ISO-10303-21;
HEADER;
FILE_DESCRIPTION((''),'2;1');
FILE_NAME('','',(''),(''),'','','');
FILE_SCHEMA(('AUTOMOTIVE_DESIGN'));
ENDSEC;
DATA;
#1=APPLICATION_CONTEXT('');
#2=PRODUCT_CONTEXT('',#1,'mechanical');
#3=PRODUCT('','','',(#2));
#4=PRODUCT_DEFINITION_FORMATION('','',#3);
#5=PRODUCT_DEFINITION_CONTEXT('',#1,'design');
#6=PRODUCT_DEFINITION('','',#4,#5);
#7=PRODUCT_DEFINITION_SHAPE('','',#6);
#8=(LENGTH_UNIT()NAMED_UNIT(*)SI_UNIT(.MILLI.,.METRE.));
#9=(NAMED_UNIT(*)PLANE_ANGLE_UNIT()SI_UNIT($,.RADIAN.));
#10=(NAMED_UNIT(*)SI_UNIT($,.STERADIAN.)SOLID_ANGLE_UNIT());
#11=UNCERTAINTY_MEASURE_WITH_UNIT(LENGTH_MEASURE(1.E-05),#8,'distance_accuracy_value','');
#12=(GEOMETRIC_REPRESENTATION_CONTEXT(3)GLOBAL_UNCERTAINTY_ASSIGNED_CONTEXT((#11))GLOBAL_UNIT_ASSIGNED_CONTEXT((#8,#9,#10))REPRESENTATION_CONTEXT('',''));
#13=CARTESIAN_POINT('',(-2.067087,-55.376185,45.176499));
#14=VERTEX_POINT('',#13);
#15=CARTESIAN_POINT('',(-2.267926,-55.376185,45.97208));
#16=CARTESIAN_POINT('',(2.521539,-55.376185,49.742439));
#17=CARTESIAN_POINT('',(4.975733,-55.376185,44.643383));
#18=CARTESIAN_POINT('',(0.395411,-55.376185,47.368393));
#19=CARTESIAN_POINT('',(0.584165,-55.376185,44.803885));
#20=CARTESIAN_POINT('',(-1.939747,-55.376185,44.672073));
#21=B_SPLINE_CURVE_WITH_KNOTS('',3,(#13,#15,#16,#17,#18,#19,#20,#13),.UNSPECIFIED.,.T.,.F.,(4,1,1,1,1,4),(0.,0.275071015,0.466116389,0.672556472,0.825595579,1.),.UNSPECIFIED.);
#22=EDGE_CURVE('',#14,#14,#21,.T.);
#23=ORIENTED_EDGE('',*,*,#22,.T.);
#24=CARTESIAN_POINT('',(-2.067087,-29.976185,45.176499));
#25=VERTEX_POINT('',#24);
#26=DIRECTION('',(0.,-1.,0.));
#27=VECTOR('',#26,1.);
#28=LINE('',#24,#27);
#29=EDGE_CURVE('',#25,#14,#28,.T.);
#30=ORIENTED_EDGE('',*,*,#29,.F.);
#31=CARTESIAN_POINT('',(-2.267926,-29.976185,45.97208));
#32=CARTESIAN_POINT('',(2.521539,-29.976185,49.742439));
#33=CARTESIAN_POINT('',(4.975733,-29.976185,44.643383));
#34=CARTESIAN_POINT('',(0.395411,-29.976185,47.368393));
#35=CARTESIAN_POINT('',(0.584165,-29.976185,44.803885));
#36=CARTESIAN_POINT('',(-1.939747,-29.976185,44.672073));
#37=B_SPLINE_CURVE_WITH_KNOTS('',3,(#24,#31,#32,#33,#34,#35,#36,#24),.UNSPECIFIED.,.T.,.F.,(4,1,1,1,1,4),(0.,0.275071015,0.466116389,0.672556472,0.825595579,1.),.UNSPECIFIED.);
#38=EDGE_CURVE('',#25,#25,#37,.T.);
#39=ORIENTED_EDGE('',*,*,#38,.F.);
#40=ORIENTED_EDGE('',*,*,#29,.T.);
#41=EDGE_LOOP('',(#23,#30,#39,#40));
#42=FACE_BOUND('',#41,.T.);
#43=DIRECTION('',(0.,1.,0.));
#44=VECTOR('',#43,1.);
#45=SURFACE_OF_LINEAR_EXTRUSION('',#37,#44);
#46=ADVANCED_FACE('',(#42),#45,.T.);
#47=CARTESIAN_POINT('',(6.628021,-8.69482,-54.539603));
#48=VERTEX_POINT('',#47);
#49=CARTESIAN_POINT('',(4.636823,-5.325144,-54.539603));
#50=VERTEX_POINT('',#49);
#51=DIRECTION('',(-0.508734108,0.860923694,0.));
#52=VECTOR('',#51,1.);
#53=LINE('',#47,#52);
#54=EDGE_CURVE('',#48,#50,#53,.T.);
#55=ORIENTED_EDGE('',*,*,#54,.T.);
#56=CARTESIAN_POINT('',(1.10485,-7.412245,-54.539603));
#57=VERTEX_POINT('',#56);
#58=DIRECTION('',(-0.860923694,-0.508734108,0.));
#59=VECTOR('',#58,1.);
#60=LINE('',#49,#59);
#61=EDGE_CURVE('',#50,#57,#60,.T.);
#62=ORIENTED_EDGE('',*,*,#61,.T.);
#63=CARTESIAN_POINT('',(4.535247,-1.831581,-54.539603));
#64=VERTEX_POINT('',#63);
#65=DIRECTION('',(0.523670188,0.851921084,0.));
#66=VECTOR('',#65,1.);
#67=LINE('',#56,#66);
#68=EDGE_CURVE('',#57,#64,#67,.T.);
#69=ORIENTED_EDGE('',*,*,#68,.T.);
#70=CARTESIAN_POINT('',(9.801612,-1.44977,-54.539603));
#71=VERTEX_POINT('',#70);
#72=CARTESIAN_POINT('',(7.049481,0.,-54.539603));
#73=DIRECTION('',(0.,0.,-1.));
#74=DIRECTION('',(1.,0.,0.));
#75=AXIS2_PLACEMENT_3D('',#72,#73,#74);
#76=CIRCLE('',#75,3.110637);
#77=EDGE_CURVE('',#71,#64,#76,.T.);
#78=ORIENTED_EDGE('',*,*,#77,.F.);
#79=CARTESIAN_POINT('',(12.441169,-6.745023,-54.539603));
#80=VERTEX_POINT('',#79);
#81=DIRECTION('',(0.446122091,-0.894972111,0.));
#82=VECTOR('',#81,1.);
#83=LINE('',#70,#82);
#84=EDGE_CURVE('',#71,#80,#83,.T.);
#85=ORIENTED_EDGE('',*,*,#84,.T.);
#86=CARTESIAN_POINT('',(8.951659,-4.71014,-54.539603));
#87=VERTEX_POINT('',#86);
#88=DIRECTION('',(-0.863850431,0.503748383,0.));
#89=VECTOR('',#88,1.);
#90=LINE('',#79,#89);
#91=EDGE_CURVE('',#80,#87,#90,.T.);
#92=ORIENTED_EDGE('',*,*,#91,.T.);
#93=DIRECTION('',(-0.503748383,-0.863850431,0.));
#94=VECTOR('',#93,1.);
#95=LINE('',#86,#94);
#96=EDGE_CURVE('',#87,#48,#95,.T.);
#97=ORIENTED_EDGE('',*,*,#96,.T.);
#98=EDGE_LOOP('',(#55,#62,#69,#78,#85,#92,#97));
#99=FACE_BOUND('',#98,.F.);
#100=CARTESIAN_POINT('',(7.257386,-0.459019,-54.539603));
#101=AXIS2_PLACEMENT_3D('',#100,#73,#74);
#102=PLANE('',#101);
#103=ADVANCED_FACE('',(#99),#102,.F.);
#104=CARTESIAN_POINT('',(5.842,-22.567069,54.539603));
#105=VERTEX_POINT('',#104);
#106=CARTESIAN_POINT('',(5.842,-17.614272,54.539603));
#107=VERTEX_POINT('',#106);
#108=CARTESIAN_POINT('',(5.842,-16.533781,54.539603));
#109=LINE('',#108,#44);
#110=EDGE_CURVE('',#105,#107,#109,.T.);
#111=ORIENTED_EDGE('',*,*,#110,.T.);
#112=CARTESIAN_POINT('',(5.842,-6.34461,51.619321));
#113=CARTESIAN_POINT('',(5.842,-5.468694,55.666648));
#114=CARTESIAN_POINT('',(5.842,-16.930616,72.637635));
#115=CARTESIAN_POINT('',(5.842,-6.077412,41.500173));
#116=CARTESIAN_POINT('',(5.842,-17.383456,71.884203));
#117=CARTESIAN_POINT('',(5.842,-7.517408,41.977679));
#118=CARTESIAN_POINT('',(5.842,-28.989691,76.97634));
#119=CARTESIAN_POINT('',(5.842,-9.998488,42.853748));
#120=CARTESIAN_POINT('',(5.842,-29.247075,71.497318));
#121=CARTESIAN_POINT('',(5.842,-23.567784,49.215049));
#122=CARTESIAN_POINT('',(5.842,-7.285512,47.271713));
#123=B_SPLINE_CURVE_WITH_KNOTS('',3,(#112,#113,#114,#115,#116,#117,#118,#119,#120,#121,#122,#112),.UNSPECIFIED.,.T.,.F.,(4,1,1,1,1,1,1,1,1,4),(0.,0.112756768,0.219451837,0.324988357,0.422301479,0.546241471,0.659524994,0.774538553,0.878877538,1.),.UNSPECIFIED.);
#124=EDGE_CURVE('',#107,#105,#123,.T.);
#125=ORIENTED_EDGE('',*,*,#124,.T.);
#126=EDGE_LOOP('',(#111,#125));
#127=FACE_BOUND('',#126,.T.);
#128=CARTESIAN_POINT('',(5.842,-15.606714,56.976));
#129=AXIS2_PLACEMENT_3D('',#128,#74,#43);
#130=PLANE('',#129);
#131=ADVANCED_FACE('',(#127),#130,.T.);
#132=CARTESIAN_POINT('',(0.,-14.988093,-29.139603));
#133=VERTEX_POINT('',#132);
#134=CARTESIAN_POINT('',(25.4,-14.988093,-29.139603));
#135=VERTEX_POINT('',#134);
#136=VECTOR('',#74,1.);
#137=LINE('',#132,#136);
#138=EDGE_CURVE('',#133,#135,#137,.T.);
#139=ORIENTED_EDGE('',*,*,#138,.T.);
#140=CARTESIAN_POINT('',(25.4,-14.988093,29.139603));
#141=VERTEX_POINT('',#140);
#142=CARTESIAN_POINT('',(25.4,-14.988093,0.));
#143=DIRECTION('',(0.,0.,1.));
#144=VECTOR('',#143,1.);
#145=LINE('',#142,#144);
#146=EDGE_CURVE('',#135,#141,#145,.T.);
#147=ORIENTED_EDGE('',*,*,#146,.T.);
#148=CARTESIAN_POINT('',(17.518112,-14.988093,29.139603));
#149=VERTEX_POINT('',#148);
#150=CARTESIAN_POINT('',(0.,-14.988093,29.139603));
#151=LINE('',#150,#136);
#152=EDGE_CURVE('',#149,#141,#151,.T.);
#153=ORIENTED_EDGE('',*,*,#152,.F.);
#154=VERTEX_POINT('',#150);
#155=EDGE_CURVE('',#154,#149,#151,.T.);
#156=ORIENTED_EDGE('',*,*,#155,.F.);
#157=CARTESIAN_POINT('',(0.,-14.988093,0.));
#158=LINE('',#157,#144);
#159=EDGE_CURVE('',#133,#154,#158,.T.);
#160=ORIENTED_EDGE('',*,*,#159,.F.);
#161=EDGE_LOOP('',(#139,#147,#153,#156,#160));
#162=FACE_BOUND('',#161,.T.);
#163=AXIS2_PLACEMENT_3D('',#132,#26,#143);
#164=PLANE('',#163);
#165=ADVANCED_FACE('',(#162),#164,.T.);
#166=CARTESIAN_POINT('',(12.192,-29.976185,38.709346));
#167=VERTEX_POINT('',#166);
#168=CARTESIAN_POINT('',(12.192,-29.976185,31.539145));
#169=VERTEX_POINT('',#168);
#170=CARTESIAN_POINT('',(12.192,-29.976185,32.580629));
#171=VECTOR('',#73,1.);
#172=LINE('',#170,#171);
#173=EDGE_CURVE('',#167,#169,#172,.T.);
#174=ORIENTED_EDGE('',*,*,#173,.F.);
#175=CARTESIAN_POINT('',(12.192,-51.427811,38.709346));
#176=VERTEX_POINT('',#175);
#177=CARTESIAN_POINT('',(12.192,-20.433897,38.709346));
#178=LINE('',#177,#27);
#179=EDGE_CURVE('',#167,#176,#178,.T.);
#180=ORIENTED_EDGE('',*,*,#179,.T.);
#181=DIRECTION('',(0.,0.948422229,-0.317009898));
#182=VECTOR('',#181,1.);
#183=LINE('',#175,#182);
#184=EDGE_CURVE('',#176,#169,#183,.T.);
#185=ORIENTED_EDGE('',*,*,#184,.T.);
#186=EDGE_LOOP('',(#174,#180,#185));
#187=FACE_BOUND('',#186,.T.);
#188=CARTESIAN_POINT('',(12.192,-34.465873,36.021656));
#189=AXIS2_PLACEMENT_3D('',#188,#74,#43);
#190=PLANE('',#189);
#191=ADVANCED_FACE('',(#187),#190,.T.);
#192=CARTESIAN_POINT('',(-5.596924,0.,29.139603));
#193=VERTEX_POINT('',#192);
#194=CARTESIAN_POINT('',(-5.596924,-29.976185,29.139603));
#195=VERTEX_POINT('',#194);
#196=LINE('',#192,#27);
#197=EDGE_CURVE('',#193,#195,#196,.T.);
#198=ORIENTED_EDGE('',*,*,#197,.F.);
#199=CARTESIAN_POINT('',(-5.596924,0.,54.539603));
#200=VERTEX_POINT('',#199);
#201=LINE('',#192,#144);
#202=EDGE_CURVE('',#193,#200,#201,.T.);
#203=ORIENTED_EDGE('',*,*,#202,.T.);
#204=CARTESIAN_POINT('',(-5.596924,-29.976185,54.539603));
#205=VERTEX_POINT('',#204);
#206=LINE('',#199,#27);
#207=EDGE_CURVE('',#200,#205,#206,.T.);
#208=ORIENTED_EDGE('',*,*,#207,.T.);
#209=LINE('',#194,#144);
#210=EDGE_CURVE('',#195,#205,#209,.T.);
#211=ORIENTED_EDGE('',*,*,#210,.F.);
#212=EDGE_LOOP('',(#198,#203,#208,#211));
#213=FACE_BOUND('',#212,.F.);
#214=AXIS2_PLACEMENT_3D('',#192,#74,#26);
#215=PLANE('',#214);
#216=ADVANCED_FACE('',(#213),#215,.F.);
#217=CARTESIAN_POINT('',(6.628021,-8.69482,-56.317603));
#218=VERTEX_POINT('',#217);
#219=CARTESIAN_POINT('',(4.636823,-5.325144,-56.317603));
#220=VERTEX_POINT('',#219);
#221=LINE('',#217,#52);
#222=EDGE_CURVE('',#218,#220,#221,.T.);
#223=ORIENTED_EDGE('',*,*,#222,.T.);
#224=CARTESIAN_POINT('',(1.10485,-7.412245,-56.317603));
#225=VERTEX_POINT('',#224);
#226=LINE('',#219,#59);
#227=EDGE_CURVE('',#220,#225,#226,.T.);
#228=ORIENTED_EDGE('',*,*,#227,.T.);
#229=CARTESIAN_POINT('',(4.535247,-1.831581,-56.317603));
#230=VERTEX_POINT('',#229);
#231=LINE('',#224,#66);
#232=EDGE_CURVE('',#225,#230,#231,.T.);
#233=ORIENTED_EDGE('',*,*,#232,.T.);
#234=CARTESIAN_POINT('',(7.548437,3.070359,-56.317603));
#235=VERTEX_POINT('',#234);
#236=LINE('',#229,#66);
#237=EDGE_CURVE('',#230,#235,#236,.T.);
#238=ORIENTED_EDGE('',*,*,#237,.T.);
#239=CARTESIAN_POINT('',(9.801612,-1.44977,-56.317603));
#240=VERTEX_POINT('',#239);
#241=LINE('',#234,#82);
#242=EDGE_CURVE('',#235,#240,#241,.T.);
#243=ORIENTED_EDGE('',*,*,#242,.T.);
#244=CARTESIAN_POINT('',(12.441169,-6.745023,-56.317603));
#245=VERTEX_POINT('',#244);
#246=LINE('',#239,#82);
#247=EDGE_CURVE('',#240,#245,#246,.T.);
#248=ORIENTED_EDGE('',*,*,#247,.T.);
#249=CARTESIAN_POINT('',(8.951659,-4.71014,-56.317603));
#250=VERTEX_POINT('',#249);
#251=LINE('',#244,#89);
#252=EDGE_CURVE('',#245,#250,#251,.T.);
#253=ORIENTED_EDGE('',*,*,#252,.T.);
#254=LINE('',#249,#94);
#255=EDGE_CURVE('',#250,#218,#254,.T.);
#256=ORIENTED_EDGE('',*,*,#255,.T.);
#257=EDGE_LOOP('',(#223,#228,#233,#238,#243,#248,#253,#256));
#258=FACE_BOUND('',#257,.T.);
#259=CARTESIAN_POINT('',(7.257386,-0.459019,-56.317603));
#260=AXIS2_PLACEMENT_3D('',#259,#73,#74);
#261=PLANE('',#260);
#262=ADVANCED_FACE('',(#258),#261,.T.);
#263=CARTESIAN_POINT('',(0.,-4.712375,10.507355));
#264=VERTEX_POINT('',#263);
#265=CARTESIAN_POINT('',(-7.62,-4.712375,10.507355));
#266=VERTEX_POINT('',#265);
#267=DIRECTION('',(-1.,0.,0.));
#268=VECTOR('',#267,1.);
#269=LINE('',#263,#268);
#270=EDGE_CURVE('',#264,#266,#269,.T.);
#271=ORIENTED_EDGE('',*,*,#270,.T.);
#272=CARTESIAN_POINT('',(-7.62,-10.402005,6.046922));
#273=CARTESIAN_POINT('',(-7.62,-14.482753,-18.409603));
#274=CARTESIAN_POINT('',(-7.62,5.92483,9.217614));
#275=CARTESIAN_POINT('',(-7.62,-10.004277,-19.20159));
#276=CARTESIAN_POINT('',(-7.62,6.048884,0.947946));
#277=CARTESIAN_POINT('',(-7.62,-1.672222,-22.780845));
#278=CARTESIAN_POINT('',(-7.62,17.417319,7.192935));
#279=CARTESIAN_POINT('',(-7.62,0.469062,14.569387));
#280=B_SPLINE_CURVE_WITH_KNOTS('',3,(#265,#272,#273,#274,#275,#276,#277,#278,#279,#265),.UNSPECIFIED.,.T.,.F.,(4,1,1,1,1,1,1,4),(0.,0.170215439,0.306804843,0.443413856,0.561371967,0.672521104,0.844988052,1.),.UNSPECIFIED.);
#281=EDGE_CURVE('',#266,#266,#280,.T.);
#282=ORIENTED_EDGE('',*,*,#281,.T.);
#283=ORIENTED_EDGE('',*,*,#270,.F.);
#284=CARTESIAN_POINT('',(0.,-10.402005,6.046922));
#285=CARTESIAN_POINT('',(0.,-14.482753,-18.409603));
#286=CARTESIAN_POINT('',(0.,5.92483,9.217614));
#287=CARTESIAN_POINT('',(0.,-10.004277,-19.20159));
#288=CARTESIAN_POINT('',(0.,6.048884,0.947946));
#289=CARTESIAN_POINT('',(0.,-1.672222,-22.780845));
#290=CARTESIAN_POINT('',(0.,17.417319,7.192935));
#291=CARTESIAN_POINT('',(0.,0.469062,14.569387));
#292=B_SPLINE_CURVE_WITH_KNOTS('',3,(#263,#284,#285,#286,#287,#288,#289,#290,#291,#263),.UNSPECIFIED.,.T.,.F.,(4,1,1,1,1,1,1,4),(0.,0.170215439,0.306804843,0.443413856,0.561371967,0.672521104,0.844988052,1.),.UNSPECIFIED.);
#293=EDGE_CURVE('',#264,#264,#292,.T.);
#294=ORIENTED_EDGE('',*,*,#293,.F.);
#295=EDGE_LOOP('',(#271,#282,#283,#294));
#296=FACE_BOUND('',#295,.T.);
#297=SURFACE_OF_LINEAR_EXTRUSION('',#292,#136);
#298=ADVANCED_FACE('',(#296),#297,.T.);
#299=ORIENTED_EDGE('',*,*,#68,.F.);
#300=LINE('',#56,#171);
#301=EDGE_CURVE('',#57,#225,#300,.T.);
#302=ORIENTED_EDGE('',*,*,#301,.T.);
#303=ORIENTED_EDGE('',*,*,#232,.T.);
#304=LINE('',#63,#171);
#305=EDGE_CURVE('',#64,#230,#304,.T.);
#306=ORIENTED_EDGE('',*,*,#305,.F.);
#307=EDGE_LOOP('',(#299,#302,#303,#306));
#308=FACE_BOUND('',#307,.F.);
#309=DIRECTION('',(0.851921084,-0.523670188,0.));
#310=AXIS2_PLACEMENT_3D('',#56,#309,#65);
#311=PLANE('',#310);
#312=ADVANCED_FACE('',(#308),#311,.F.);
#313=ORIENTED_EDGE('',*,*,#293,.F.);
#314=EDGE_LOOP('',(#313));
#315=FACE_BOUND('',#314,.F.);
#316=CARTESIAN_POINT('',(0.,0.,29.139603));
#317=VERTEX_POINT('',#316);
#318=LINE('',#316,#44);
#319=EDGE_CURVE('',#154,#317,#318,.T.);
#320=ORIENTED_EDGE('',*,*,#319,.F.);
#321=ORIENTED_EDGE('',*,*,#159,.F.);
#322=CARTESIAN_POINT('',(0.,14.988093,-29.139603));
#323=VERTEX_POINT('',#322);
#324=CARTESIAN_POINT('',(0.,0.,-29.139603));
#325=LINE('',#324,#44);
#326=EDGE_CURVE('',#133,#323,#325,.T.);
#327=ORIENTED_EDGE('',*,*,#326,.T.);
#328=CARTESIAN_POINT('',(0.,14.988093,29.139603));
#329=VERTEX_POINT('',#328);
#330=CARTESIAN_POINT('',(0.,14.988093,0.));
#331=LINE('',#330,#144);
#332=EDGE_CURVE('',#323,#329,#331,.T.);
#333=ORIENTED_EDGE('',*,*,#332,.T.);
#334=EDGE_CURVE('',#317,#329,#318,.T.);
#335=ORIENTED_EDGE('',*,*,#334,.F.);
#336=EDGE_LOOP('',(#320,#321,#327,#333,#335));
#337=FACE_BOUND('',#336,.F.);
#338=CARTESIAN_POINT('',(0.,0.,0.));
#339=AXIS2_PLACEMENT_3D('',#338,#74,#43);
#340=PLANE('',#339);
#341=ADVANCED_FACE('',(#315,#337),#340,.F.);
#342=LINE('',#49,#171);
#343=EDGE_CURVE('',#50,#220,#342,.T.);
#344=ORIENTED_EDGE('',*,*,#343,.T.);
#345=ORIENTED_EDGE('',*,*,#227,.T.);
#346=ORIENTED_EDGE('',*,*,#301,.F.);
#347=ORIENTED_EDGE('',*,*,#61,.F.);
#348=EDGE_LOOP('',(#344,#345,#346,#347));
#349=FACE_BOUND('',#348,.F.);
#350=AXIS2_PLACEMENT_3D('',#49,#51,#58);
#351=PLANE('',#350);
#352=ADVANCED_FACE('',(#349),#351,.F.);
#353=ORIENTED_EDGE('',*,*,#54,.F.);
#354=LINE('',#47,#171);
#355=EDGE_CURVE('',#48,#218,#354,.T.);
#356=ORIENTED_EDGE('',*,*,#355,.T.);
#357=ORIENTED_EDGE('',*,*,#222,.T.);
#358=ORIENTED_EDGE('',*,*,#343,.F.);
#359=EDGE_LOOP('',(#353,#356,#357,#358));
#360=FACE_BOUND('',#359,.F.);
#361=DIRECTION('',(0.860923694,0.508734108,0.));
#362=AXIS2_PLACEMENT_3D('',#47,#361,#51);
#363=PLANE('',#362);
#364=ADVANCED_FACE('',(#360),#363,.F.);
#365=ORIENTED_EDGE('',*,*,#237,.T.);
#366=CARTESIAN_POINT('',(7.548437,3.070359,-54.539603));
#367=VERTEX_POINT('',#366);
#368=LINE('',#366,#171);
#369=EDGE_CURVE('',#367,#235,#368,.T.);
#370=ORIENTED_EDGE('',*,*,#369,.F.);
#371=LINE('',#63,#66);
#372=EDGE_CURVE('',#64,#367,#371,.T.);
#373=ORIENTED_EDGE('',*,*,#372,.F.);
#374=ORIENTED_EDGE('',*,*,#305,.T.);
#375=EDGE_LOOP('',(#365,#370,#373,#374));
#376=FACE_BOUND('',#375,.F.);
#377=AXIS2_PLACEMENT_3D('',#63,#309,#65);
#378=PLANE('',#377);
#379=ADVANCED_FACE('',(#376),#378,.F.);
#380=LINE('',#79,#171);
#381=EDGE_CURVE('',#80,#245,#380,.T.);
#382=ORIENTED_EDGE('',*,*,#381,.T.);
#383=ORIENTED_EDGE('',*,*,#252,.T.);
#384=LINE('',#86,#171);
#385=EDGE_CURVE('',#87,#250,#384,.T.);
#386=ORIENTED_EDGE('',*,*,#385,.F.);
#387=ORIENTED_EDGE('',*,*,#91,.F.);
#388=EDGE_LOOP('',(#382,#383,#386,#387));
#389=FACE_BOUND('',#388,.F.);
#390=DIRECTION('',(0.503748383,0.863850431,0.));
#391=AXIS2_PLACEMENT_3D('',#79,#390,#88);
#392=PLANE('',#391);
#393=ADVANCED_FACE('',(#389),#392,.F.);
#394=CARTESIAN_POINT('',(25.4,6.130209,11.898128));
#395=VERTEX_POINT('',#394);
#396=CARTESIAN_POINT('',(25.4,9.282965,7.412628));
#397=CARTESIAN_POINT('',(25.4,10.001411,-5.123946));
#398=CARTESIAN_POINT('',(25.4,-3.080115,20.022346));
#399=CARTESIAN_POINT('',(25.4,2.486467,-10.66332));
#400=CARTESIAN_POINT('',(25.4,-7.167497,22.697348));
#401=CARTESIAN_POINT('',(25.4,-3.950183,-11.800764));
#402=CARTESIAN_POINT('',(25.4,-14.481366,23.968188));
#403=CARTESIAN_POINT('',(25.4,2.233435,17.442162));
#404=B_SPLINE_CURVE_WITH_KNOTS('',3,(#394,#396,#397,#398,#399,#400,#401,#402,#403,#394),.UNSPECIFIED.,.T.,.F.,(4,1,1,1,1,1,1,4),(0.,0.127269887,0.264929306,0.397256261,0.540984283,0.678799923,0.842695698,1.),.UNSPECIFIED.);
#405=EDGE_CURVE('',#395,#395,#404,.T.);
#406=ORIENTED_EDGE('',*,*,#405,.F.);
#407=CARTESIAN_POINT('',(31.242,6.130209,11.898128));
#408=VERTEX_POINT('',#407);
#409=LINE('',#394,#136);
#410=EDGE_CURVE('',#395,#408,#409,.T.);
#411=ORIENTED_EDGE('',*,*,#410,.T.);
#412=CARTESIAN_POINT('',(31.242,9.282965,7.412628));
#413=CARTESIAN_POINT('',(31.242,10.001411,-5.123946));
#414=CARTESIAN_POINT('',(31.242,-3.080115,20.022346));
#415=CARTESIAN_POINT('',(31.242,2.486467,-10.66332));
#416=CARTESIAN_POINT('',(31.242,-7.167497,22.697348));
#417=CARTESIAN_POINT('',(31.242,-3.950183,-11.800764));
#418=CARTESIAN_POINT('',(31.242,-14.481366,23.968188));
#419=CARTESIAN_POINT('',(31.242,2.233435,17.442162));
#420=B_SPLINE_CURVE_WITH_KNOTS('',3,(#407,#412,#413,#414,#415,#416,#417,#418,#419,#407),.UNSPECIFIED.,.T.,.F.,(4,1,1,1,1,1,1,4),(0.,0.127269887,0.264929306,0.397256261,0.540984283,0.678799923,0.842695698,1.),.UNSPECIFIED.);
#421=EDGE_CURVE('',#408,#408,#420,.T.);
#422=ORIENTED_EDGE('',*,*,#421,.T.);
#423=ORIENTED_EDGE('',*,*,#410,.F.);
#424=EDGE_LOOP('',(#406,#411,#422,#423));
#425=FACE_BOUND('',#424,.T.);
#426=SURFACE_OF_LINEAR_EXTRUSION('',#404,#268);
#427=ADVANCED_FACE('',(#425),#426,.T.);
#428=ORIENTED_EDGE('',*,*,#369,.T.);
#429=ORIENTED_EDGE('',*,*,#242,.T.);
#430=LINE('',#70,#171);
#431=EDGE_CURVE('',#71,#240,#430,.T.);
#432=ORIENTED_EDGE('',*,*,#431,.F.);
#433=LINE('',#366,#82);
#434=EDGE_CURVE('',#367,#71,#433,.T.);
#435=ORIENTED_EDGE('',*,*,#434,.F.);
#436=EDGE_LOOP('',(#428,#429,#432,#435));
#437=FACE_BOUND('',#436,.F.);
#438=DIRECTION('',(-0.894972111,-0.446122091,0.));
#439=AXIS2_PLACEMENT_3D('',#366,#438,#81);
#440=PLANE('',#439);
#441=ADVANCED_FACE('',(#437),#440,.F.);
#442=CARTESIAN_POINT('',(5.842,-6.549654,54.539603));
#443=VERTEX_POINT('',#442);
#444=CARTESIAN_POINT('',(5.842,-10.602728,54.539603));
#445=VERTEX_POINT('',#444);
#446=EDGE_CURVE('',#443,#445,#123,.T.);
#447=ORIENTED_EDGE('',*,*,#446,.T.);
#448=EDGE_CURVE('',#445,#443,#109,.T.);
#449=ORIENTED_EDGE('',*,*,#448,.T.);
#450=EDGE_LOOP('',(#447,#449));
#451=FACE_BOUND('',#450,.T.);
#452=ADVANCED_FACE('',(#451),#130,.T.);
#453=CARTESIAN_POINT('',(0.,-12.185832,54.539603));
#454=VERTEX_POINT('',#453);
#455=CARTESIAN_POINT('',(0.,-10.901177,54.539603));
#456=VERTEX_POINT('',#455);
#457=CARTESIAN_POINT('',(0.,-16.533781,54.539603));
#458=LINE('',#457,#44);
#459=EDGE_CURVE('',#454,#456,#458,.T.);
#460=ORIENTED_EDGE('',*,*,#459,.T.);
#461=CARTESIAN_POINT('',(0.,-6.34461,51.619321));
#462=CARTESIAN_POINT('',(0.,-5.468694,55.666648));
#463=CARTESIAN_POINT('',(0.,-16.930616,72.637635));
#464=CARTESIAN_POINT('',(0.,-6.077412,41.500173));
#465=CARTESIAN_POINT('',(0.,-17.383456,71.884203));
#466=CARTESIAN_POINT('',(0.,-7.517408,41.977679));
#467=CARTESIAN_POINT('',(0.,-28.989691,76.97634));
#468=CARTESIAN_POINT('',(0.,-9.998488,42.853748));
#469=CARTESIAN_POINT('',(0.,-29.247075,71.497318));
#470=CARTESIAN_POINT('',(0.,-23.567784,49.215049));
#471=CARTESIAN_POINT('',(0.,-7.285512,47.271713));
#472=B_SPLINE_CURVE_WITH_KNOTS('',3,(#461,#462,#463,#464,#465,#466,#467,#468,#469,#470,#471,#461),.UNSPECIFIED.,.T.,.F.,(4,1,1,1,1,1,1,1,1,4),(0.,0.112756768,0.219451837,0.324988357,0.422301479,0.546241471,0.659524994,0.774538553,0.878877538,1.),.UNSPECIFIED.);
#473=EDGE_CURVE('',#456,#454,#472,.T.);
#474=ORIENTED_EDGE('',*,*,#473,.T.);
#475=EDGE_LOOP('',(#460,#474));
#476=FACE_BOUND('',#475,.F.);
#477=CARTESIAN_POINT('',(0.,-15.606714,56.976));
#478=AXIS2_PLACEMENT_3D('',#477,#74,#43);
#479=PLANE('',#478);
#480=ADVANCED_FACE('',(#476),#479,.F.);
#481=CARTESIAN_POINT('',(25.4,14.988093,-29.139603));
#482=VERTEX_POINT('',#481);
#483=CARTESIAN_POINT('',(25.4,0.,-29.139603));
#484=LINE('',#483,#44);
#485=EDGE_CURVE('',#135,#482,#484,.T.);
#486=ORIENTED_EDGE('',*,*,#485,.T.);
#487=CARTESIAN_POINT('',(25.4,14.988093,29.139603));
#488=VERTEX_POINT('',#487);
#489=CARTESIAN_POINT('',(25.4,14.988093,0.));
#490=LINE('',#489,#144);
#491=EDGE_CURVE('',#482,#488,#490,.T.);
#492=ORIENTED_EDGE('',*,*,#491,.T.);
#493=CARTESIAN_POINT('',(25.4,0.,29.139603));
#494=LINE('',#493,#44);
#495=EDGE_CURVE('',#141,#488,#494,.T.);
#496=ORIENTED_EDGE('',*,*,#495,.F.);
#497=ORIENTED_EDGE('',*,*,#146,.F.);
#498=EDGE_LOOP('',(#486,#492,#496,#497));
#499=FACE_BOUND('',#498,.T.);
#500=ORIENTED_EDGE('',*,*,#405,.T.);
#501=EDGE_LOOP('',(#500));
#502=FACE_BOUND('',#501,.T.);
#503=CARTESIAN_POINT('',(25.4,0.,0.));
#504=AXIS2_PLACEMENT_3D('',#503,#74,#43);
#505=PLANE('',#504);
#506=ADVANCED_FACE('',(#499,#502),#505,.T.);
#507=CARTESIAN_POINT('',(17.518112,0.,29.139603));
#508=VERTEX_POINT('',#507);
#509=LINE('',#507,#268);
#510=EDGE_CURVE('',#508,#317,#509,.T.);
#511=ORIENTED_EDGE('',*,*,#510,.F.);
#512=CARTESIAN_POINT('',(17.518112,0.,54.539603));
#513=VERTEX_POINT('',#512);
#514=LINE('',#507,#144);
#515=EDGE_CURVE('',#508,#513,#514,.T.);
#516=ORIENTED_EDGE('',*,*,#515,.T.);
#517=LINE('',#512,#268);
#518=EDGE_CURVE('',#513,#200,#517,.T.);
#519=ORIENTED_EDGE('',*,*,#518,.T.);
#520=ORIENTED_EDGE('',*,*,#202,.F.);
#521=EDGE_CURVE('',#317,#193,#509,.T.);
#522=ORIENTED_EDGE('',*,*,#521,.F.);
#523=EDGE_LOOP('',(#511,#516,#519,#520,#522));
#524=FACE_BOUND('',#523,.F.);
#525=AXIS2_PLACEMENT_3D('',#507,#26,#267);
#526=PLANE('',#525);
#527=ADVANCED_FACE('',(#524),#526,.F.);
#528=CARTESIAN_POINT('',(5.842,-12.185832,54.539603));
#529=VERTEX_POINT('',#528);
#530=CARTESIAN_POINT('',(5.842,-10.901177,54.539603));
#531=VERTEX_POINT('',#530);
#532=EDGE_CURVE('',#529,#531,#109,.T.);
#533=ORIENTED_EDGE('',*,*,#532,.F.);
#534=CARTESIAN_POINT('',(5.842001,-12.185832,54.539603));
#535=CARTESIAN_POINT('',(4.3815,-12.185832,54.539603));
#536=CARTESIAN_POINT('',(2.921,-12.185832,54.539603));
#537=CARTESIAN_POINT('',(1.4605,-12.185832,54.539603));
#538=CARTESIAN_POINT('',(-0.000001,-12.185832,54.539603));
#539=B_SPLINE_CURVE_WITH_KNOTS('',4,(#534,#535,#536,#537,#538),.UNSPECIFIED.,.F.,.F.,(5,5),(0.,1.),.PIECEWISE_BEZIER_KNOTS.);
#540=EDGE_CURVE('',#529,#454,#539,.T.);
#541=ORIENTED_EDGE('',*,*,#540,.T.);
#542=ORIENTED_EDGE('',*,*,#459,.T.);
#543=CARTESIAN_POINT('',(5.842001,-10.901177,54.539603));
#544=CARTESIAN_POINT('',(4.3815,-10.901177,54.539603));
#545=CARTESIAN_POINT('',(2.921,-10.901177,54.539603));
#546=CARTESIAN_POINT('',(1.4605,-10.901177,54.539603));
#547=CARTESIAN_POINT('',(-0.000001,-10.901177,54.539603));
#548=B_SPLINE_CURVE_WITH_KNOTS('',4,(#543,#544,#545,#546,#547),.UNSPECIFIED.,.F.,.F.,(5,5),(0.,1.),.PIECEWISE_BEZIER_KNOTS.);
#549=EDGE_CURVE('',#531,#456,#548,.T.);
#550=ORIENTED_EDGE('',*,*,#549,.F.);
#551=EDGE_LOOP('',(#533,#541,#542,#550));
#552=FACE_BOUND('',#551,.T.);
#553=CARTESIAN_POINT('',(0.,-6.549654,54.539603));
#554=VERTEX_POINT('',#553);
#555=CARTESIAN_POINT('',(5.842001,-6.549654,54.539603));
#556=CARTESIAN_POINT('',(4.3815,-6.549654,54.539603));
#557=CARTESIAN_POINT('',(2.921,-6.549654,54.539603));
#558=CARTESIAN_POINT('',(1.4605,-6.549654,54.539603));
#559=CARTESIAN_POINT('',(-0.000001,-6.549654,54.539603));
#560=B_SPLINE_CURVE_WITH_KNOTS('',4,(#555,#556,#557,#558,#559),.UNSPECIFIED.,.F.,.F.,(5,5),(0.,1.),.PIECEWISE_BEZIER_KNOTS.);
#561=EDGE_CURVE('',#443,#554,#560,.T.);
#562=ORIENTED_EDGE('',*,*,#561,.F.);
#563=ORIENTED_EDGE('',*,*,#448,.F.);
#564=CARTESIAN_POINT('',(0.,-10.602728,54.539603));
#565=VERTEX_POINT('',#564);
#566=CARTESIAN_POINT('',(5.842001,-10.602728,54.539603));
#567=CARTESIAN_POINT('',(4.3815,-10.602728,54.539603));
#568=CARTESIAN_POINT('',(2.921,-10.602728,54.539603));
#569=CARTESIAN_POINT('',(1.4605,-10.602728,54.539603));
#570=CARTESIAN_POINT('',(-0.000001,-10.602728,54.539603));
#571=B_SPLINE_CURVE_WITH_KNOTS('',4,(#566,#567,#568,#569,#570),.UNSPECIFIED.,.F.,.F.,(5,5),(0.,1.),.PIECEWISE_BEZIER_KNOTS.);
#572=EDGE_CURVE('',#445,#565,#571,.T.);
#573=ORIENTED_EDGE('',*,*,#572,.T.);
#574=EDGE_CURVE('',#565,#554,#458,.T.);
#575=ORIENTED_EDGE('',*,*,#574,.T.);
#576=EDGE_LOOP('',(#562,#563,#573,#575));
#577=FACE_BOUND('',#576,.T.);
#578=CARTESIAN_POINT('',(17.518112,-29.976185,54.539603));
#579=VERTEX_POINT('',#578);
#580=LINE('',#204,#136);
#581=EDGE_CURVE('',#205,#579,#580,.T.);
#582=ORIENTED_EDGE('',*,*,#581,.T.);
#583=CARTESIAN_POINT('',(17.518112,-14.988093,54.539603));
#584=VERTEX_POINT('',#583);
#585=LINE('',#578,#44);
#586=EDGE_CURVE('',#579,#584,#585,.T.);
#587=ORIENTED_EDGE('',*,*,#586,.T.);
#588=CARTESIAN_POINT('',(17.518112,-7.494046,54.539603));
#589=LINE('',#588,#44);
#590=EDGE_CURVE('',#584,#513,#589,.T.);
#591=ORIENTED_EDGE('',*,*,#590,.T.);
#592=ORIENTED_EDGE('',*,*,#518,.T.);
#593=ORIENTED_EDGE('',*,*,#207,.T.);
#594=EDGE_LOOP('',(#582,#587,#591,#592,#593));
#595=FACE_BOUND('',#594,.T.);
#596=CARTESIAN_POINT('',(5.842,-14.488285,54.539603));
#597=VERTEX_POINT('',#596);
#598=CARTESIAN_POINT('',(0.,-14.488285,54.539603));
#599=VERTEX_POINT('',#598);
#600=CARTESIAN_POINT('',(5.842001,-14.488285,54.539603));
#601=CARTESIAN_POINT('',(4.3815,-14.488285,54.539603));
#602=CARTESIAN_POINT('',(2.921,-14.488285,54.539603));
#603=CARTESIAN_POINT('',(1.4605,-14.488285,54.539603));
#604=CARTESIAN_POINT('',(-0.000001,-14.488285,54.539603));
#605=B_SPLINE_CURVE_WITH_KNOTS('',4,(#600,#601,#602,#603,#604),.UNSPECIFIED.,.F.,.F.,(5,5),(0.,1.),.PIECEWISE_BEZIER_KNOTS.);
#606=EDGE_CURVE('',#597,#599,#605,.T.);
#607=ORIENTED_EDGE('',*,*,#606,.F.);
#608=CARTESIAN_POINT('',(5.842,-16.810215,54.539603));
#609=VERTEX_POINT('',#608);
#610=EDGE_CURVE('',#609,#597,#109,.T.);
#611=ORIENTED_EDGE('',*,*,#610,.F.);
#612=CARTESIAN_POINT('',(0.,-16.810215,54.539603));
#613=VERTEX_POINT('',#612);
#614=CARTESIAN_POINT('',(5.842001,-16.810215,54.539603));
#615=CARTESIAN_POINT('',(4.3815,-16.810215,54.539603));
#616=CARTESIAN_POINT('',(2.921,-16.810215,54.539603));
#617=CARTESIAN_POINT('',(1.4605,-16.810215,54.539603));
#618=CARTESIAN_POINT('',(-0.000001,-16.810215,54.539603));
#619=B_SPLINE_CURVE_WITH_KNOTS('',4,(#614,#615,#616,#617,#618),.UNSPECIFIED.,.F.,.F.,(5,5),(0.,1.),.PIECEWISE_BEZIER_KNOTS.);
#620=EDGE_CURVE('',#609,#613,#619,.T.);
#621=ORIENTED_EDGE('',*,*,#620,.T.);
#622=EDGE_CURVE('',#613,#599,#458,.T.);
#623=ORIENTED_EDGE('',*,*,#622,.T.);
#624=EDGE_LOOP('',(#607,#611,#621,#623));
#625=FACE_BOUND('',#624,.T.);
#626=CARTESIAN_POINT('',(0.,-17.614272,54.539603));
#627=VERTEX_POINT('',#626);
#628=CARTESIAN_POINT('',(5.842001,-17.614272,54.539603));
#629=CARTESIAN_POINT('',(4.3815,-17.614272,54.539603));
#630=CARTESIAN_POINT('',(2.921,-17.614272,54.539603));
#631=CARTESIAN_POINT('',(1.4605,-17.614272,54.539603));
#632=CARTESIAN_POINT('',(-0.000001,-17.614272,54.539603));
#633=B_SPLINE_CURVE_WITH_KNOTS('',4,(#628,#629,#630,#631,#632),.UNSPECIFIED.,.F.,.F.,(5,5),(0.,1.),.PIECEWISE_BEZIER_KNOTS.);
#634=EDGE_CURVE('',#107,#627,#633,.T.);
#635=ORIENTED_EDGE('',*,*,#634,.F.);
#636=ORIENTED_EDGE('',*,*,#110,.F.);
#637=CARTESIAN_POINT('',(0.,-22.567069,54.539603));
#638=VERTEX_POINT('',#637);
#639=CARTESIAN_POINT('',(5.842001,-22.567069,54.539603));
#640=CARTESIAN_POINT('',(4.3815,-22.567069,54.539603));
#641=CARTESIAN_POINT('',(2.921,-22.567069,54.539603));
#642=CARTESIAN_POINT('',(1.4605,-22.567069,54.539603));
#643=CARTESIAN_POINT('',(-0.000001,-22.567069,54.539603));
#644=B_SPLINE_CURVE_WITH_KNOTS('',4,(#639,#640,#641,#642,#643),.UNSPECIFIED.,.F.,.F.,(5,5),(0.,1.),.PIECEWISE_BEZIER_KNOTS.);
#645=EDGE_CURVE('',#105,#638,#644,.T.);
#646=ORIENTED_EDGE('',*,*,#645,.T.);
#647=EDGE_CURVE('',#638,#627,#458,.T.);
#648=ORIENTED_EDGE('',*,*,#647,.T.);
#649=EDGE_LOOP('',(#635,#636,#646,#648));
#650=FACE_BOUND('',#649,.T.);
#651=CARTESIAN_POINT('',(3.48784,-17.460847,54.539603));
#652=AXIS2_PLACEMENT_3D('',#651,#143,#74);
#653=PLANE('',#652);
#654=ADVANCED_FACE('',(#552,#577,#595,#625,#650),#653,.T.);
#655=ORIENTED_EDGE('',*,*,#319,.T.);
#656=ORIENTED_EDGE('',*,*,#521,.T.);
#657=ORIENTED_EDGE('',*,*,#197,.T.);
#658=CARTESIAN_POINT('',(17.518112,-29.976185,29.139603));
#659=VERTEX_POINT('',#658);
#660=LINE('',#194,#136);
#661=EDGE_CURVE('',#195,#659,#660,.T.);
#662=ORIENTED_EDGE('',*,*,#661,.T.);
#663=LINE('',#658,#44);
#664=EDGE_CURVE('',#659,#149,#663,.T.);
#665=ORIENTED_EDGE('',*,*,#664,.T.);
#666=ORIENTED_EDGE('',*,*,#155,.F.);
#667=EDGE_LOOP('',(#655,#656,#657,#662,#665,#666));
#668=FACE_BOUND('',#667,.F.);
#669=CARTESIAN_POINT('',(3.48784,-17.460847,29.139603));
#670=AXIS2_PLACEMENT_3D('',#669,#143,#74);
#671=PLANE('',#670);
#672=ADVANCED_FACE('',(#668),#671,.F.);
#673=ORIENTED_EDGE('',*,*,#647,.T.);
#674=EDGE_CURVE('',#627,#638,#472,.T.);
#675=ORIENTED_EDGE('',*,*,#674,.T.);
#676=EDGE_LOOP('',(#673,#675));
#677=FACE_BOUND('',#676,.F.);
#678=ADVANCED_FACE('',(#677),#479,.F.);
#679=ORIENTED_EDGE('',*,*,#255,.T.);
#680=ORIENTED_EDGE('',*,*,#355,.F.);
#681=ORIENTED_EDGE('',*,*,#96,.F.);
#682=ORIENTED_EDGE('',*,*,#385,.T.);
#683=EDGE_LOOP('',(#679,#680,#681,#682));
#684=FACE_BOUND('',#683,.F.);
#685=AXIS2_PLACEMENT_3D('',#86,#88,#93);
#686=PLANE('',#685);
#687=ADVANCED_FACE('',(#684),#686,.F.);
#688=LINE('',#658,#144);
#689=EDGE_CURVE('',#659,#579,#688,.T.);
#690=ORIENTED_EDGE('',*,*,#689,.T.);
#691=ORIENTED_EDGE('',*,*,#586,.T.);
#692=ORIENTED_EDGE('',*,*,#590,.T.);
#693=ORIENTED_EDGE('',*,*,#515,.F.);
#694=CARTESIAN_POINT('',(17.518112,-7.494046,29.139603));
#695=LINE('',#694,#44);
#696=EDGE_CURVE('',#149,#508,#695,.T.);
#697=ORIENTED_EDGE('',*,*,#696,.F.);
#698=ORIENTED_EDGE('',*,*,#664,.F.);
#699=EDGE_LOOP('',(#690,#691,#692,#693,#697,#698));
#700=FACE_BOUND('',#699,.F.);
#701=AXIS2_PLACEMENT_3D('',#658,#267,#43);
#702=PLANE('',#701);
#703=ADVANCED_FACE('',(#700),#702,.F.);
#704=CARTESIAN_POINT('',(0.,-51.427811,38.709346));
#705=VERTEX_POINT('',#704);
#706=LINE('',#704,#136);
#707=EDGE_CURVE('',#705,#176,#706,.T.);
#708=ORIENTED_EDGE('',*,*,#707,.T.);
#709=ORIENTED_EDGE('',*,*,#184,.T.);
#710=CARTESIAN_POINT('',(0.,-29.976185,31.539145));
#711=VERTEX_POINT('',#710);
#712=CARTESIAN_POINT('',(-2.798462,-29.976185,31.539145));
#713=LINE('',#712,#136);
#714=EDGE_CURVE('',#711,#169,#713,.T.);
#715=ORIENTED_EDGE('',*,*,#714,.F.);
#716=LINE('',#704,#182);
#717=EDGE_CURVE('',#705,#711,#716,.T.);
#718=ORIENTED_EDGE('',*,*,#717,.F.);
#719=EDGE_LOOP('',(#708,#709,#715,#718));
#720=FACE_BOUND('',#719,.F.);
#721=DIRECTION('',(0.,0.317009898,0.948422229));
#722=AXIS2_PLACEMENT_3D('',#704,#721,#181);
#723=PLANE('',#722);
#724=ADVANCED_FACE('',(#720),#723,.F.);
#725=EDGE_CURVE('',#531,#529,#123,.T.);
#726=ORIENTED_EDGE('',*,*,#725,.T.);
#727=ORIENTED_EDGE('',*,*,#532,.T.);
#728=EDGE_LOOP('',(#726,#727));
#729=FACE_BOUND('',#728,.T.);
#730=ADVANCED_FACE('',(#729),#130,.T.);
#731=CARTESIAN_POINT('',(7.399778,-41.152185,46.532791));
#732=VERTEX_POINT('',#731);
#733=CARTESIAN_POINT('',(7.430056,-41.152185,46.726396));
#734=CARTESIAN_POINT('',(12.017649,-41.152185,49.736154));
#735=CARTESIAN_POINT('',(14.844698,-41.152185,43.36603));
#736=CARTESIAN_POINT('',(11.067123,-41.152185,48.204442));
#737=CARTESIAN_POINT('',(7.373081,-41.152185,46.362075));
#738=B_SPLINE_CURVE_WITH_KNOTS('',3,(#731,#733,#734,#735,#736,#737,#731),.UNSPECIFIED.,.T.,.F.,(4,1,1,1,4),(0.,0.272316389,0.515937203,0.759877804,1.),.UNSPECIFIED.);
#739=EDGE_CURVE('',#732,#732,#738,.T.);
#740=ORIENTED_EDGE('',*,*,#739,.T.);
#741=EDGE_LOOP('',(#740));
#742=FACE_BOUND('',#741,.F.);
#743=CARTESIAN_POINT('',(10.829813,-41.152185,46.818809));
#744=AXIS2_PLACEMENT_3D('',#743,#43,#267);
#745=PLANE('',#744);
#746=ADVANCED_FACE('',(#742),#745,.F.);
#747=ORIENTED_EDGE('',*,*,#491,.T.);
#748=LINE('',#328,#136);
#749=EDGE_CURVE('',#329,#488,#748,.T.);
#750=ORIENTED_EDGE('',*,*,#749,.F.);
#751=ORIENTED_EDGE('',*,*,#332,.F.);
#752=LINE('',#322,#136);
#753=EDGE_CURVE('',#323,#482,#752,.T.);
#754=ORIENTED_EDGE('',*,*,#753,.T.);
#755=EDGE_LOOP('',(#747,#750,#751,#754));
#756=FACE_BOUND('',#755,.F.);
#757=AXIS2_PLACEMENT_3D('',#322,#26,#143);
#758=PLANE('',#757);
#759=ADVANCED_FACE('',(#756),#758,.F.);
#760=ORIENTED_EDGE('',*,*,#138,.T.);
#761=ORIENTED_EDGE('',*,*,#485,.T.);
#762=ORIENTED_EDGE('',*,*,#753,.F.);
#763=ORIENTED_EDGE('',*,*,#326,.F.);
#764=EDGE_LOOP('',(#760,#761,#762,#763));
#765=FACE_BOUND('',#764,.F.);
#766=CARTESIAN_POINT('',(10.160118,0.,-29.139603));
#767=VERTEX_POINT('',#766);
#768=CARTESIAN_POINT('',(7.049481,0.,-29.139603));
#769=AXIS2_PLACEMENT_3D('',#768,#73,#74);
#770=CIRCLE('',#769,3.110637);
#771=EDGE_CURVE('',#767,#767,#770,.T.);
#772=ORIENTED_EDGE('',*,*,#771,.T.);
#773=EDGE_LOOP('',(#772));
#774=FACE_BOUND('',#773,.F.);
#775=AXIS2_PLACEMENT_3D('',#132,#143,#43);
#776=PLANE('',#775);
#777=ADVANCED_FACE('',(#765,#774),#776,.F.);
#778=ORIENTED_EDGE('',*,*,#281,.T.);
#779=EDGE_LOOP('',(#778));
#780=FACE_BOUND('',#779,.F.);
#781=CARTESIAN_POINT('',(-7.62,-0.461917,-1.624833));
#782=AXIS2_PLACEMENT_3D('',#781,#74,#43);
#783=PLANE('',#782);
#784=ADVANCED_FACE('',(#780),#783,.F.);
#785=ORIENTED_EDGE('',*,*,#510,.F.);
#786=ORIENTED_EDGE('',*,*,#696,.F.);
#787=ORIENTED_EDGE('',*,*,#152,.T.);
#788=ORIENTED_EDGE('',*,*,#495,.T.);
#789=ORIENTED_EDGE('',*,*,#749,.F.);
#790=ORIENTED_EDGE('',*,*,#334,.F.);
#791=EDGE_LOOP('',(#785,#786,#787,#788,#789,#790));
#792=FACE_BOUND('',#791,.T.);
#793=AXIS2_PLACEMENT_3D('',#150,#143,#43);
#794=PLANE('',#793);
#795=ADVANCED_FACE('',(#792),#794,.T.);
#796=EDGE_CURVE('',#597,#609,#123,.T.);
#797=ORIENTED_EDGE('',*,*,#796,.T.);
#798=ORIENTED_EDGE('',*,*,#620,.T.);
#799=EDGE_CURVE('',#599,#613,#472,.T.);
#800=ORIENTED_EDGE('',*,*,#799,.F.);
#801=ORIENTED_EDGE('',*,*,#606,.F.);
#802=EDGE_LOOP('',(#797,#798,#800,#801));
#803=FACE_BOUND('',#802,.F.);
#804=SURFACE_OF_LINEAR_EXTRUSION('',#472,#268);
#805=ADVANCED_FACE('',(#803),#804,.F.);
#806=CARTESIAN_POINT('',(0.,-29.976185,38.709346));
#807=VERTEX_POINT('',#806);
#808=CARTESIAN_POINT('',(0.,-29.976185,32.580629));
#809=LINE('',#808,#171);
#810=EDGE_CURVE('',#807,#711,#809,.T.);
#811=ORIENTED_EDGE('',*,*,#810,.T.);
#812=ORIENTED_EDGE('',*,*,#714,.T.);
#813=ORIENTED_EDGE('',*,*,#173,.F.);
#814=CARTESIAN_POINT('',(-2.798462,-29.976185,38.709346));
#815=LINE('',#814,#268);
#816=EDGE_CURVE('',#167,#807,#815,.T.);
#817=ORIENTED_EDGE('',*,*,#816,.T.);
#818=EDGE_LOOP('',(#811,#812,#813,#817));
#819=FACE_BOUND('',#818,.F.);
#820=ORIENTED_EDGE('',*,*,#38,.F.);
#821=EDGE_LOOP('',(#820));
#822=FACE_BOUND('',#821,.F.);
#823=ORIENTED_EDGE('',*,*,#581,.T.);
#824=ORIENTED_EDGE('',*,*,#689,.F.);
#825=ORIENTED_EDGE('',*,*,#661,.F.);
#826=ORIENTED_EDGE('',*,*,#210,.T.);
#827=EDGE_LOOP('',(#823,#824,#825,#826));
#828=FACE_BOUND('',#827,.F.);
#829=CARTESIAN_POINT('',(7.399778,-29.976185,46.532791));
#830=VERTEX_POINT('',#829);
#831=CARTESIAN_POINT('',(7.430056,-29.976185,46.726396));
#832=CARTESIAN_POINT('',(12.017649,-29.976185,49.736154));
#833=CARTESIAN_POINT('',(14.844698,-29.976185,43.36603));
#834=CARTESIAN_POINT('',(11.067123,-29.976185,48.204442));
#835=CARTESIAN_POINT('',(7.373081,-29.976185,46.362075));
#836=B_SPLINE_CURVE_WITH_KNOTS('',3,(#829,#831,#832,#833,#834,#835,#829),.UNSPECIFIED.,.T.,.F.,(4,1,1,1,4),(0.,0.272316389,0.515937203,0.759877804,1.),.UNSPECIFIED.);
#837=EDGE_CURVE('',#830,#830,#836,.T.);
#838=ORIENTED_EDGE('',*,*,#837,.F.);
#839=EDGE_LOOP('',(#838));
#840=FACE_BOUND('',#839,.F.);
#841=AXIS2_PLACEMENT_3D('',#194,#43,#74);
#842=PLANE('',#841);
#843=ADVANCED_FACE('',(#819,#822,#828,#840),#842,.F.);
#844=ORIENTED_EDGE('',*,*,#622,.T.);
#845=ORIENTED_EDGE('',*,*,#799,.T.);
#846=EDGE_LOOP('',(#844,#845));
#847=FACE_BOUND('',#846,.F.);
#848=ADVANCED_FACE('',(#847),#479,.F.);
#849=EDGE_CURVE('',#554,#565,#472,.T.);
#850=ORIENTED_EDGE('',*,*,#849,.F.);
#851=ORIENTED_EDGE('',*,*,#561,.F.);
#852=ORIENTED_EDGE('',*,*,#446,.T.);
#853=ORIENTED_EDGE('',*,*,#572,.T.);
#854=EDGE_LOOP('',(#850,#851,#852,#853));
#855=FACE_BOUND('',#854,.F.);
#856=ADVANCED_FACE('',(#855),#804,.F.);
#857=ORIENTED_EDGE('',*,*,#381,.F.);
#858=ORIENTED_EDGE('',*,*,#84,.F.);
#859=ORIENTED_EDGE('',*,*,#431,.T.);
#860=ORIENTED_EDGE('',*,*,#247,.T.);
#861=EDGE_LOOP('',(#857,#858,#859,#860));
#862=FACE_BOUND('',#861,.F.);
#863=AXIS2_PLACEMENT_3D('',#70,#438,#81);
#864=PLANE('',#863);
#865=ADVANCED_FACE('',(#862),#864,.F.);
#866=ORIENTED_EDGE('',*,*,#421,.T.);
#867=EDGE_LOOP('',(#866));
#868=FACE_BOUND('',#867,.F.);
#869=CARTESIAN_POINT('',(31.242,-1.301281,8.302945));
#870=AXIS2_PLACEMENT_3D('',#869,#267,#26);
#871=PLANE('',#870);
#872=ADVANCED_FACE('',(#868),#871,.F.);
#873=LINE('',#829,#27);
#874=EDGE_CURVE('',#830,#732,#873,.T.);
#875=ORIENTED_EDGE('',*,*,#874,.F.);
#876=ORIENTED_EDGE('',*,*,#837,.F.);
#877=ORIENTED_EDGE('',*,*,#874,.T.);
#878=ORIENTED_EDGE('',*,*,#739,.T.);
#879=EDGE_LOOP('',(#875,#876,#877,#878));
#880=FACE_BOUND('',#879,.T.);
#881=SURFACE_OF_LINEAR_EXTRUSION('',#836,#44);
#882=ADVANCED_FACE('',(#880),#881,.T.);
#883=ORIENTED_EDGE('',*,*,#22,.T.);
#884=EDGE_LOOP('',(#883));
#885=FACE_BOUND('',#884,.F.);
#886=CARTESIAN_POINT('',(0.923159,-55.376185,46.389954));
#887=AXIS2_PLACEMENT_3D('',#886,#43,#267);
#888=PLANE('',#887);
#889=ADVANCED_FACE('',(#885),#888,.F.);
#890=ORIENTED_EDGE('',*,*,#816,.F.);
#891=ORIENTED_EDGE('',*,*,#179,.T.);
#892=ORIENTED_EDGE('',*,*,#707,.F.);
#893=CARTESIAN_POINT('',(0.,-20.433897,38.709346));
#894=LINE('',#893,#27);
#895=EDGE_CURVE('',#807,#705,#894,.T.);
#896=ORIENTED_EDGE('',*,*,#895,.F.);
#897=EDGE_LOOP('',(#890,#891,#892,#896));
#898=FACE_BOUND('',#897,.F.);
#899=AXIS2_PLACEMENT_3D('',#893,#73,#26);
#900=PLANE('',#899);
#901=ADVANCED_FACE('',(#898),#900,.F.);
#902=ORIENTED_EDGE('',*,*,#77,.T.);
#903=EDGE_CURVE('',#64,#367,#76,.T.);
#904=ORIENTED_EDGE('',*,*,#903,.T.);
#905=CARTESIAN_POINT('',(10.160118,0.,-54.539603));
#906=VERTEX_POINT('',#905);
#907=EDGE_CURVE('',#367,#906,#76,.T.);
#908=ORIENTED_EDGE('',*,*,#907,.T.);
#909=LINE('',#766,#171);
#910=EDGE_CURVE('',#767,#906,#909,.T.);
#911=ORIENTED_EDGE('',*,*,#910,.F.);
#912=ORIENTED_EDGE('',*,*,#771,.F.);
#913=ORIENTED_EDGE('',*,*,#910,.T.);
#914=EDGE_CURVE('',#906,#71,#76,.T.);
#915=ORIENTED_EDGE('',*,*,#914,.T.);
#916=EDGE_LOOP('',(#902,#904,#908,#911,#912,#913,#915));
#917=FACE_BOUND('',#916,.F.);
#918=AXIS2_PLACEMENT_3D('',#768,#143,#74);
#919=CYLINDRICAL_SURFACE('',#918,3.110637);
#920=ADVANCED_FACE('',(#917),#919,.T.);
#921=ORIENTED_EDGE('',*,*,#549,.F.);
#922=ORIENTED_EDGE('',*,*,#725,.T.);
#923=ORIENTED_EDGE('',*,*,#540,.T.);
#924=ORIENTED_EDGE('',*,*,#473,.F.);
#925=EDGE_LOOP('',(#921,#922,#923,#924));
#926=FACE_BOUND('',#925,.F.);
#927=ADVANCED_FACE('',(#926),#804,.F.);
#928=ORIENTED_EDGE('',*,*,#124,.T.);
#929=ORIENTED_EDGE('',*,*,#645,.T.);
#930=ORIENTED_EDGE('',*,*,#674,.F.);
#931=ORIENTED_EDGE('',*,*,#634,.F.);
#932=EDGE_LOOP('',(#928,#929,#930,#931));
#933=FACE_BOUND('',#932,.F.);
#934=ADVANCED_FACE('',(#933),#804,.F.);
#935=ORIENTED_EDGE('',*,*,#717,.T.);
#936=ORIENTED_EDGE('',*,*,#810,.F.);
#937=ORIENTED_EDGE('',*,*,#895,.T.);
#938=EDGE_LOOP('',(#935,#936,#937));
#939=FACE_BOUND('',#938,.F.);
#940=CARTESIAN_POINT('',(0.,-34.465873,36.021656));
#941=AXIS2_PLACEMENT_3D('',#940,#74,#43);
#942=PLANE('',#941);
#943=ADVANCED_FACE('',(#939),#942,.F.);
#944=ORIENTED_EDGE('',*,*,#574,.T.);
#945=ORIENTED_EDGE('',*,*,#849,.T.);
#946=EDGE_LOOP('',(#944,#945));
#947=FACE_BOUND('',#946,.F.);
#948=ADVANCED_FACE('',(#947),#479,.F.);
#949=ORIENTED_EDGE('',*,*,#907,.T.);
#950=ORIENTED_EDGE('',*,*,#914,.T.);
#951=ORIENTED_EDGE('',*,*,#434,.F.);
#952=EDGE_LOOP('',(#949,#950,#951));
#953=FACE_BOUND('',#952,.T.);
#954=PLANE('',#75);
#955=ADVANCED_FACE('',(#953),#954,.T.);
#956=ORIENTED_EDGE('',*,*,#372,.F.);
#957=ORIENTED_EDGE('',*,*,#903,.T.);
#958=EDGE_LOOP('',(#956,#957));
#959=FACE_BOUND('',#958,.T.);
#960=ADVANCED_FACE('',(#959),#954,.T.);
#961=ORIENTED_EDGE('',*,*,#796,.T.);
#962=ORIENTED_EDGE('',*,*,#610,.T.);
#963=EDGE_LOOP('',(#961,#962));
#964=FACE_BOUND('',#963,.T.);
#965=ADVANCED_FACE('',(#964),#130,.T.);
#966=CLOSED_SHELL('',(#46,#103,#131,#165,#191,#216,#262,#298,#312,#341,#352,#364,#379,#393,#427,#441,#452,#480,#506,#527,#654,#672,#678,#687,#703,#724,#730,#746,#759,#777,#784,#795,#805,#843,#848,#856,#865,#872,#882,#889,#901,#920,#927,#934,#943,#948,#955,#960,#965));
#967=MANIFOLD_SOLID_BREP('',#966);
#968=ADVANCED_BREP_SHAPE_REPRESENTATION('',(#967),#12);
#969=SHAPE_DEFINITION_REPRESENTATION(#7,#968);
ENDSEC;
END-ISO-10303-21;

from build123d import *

# Parameters (mm, degrees)
F0_W      = 29.9761854112
F0_H      = 58.2792051136
F1_DEPTH  = 25.4
F2_R      = 3.1106368609
F3_DEPTH  = 25.4
F5_DEPTH  = 1.778
F7_DEPTH  = 7.62
F10_W     = 17.5181124359
F10_H     = 14.9880927056
F11_DEPTH = 25.4
F13_DEPTH = 12.192
F15_DEPTH = 11.176
F17_DEPTH = 25.4
F19_DEPTH = 5.842
F22_DEPTH = 5.842


# Not quite as in the source:
# - the program builds the solid bodies; features that only make, move or delete a surface that nothing else refers to are left out


with BuildPart() as f1:
    # F0 (on Right) → F1 (new body)
    with BuildSketch(Plane.YZ):
        Rectangle(F0_W, F0_H)
    extrude(amount=F1_DEPTH)

    # F2 (on face) → F3 (join)
    with BuildSketch(Plane(origin=(0, 0, -29.1396025568), x_dir=(1, 0, 0), z_dir=(0, 0, -1))):
        with Locations((7.0494809188, 0)):
            Circle(F2_R)
    extrude(amount=F3_DEPTH)

    # F4 (on face) → F5 (join)
    with BuildSketch(Plane(origin=(0, 0, -54.5396025568), x_dir=(1, 0, 0), z_dir=(0, 0, -1))):
        with BuildLine():
            Line((4.5352468525, 1.8315809401), (7.5484365778, -3.0703590882))
            Line((7.5484365778, -3.0703590882), (9.8016124347, 1.4497702575))
            ThreePointArc((9.8016124347, 1.4497702575), (7.2744112379, 3.1024938407), (4.5352468525, 1.8315809401))
        make_face()
        with BuildLine():
            ThreePointArc((4.5352468525, 1.8315809401), (7.2744112379, 3.1024938407), (9.8016124347, 1.4497702575))
            Line((9.8016124347, 1.4497702575), (12.4411685392, 6.7450227216))
            Line((12.4411685392, 6.7450227216), (8.9516591602, 4.7101395455))
            Line((8.9516591602, 4.7101395455), (6.6280206473, 8.6948195899))
            Line((6.6280206473, 8.6948195899), (4.6368231997, 5.3251436912))
            Line((4.6368231997, 5.3251436912), (1.1048497138, 7.4122454782))
            Line((1.1048497138, 7.4122454782), (4.5352468525, 1.8315809401))
        make_face()
    extrude(amount=F5_DEPTH)

    # F6 (on face) → F7 (join)
    with BuildSketch(Plane(origin=(0, 0, 0), x_dir=(0, -1, 0), z_dir=(-1, 0, 0))):
        with BuildLine():
            add(Edge.make_bspline(
                [(4.7123748809, 10.5073554441), (10.4020048834, 6.0469216692), (14.482753043, -18.4096027525), (-5.924829801, 9.2176141253), (10.0042769088, -19.2015895825), (-6.0488841899, 0.9479463993), (1.6722222045, -22.7808454121), (-17.4173194452, 7.1929346827), (-0.4690624248, 14.5693872372), (4.7123748809, 10.5073554441)],
                knots=[0, 0, 0, 0, 0.1702154393, 0.3068048429, 0.4434138565, 0.5613719669, 0.6725211035, 0.8449880525, 1, 1, 1, 1], degree=3))
        make_face()
    extrude(amount=F7_DEPTH)

    # F10 (on face) → F11 (join)
    with BuildSketch(Plane.XY.offset(29.1396025568)):
        Polygon((0, -14.9880927056), (0, 0), (-5.5969236419, 0), (-5.5969236419, -29.9761854112), (17.5181124359, -29.9761854112), (17.5181124359, -14.9880927056), align=None)
        with Locations((8.759056218, -7.4940463528)):
            Rectangle(F10_W, F10_H)
    extrude(amount=F11_DEPTH)

    # F12 (on Right) → F13 (join)
    with BuildSketch(Plane.YZ):
        Polygon((-22.8722672909, 29.1646625847), (-20.4338971525, 38.709346205), (-51.4278113842, 38.709346205), align=None)
    extrude(amount=F13_DEPTH)

    # F14 (on face) → F15 (join)
    with BuildSketch(Plane.XZ.offset(29.9761854112)):
        with BuildLine():
            add(Edge.make_bspline(
                [(7.3997783475, 46.5327911079), (7.4300555129, 46.726396017), (12.017649382, 49.7361544129), (14.8446983557, 43.366029917), (11.067123155, 48.2044418567), (7.3730806541, 46.3620748461), (7.3997783475, 46.5327911079)],
                knots=[0, 0, 0, 0, 0.2723163892, 0.5159372032, 0.7598778037, 1, 1, 1, 1], degree=3))
        make_face()
    extrude(amount=F15_DEPTH)

    # F16 (on face) → F17 (join)
    with BuildSketch(Plane.XZ.offset(29.9761854112)):
        with BuildLine():
            add(Edge.make_bspline(
                [(-2.0670865197, 45.1764985919), (-2.2679260704, 45.9720796488), (2.5215394339, 49.7424392175), (4.9757332108, 44.6433833293), (0.3954107527, 47.3683932594), (0.5841652854, 44.8038853937), (-1.9397473834, 44.6720730229), (-2.0670865197, 45.1764985919)],
                knots=[0, 0, 0, 0, 0.2750710154, 0.4661163886, 0.6725564717, 0.8255955791, 1, 1, 1, 1], degree=3))
        make_face()
    extrude(amount=F17_DEPTH)

    # F18 (on Right) → F19 (join)
    with BuildSketch(Plane.YZ):
        with BuildLine():
            add(Edge.make_bspline(
                [(-6.3446098939, 51.6193211079), (-5.4686944606, 55.6666483448), (-16.9306163999, 72.6376345133), (-6.0774124126, 41.5001725985), (-17.3834556406, 71.8842029817), (-7.5174079129, 41.9776794539), (-28.9896907381, 76.9763396034), (-9.9984881416, 42.8537482337), (-29.247075277, 71.4973178557), (-23.5677841822, 49.2150494774), (-7.2855115917, 47.2717129661), (-6.3446098939, 51.6193211079)],
                knots=[0, 0, 0, 0, 0.1127567676, 0.2194518366, 0.3249883567, 0.4223014786, 0.5462414706, 0.6595249944, 0.7745385529, 0.8788775377, 1, 1, 1, 1], degree=3))
        make_face()
    extrude(amount=F19_DEPTH)

    # F21 (on face) → F22 (join)
    with BuildSketch(Plane.YZ.offset(25.4)):
        with BuildLine():
            add(Edge.make_bspline(
                [(6.1302091926, 11.8981283158), (9.2829648971, 7.4126280593), (10.0014106037, -5.123945743), (-3.0801152221, 20.0223455827), (2.4864670128, -10.6633195664), (-7.1674971904, 22.6973479765), (-3.9501833723, -11.8007639922), (-14.4813659577, 23.9681879448), (2.2334347969, 17.4421615965), (6.1302091926, 11.8981283158)],
                knots=[0, 0, 0, 0, 0.1272698868, 0.264929306, 0.3972562607, 0.5409842834, 0.6787999232, 0.8426956978, 1, 1, 1, 1], degree=3))
        make_face()
    extrude(amount=F22_DEPTH)


solid = f1.part
